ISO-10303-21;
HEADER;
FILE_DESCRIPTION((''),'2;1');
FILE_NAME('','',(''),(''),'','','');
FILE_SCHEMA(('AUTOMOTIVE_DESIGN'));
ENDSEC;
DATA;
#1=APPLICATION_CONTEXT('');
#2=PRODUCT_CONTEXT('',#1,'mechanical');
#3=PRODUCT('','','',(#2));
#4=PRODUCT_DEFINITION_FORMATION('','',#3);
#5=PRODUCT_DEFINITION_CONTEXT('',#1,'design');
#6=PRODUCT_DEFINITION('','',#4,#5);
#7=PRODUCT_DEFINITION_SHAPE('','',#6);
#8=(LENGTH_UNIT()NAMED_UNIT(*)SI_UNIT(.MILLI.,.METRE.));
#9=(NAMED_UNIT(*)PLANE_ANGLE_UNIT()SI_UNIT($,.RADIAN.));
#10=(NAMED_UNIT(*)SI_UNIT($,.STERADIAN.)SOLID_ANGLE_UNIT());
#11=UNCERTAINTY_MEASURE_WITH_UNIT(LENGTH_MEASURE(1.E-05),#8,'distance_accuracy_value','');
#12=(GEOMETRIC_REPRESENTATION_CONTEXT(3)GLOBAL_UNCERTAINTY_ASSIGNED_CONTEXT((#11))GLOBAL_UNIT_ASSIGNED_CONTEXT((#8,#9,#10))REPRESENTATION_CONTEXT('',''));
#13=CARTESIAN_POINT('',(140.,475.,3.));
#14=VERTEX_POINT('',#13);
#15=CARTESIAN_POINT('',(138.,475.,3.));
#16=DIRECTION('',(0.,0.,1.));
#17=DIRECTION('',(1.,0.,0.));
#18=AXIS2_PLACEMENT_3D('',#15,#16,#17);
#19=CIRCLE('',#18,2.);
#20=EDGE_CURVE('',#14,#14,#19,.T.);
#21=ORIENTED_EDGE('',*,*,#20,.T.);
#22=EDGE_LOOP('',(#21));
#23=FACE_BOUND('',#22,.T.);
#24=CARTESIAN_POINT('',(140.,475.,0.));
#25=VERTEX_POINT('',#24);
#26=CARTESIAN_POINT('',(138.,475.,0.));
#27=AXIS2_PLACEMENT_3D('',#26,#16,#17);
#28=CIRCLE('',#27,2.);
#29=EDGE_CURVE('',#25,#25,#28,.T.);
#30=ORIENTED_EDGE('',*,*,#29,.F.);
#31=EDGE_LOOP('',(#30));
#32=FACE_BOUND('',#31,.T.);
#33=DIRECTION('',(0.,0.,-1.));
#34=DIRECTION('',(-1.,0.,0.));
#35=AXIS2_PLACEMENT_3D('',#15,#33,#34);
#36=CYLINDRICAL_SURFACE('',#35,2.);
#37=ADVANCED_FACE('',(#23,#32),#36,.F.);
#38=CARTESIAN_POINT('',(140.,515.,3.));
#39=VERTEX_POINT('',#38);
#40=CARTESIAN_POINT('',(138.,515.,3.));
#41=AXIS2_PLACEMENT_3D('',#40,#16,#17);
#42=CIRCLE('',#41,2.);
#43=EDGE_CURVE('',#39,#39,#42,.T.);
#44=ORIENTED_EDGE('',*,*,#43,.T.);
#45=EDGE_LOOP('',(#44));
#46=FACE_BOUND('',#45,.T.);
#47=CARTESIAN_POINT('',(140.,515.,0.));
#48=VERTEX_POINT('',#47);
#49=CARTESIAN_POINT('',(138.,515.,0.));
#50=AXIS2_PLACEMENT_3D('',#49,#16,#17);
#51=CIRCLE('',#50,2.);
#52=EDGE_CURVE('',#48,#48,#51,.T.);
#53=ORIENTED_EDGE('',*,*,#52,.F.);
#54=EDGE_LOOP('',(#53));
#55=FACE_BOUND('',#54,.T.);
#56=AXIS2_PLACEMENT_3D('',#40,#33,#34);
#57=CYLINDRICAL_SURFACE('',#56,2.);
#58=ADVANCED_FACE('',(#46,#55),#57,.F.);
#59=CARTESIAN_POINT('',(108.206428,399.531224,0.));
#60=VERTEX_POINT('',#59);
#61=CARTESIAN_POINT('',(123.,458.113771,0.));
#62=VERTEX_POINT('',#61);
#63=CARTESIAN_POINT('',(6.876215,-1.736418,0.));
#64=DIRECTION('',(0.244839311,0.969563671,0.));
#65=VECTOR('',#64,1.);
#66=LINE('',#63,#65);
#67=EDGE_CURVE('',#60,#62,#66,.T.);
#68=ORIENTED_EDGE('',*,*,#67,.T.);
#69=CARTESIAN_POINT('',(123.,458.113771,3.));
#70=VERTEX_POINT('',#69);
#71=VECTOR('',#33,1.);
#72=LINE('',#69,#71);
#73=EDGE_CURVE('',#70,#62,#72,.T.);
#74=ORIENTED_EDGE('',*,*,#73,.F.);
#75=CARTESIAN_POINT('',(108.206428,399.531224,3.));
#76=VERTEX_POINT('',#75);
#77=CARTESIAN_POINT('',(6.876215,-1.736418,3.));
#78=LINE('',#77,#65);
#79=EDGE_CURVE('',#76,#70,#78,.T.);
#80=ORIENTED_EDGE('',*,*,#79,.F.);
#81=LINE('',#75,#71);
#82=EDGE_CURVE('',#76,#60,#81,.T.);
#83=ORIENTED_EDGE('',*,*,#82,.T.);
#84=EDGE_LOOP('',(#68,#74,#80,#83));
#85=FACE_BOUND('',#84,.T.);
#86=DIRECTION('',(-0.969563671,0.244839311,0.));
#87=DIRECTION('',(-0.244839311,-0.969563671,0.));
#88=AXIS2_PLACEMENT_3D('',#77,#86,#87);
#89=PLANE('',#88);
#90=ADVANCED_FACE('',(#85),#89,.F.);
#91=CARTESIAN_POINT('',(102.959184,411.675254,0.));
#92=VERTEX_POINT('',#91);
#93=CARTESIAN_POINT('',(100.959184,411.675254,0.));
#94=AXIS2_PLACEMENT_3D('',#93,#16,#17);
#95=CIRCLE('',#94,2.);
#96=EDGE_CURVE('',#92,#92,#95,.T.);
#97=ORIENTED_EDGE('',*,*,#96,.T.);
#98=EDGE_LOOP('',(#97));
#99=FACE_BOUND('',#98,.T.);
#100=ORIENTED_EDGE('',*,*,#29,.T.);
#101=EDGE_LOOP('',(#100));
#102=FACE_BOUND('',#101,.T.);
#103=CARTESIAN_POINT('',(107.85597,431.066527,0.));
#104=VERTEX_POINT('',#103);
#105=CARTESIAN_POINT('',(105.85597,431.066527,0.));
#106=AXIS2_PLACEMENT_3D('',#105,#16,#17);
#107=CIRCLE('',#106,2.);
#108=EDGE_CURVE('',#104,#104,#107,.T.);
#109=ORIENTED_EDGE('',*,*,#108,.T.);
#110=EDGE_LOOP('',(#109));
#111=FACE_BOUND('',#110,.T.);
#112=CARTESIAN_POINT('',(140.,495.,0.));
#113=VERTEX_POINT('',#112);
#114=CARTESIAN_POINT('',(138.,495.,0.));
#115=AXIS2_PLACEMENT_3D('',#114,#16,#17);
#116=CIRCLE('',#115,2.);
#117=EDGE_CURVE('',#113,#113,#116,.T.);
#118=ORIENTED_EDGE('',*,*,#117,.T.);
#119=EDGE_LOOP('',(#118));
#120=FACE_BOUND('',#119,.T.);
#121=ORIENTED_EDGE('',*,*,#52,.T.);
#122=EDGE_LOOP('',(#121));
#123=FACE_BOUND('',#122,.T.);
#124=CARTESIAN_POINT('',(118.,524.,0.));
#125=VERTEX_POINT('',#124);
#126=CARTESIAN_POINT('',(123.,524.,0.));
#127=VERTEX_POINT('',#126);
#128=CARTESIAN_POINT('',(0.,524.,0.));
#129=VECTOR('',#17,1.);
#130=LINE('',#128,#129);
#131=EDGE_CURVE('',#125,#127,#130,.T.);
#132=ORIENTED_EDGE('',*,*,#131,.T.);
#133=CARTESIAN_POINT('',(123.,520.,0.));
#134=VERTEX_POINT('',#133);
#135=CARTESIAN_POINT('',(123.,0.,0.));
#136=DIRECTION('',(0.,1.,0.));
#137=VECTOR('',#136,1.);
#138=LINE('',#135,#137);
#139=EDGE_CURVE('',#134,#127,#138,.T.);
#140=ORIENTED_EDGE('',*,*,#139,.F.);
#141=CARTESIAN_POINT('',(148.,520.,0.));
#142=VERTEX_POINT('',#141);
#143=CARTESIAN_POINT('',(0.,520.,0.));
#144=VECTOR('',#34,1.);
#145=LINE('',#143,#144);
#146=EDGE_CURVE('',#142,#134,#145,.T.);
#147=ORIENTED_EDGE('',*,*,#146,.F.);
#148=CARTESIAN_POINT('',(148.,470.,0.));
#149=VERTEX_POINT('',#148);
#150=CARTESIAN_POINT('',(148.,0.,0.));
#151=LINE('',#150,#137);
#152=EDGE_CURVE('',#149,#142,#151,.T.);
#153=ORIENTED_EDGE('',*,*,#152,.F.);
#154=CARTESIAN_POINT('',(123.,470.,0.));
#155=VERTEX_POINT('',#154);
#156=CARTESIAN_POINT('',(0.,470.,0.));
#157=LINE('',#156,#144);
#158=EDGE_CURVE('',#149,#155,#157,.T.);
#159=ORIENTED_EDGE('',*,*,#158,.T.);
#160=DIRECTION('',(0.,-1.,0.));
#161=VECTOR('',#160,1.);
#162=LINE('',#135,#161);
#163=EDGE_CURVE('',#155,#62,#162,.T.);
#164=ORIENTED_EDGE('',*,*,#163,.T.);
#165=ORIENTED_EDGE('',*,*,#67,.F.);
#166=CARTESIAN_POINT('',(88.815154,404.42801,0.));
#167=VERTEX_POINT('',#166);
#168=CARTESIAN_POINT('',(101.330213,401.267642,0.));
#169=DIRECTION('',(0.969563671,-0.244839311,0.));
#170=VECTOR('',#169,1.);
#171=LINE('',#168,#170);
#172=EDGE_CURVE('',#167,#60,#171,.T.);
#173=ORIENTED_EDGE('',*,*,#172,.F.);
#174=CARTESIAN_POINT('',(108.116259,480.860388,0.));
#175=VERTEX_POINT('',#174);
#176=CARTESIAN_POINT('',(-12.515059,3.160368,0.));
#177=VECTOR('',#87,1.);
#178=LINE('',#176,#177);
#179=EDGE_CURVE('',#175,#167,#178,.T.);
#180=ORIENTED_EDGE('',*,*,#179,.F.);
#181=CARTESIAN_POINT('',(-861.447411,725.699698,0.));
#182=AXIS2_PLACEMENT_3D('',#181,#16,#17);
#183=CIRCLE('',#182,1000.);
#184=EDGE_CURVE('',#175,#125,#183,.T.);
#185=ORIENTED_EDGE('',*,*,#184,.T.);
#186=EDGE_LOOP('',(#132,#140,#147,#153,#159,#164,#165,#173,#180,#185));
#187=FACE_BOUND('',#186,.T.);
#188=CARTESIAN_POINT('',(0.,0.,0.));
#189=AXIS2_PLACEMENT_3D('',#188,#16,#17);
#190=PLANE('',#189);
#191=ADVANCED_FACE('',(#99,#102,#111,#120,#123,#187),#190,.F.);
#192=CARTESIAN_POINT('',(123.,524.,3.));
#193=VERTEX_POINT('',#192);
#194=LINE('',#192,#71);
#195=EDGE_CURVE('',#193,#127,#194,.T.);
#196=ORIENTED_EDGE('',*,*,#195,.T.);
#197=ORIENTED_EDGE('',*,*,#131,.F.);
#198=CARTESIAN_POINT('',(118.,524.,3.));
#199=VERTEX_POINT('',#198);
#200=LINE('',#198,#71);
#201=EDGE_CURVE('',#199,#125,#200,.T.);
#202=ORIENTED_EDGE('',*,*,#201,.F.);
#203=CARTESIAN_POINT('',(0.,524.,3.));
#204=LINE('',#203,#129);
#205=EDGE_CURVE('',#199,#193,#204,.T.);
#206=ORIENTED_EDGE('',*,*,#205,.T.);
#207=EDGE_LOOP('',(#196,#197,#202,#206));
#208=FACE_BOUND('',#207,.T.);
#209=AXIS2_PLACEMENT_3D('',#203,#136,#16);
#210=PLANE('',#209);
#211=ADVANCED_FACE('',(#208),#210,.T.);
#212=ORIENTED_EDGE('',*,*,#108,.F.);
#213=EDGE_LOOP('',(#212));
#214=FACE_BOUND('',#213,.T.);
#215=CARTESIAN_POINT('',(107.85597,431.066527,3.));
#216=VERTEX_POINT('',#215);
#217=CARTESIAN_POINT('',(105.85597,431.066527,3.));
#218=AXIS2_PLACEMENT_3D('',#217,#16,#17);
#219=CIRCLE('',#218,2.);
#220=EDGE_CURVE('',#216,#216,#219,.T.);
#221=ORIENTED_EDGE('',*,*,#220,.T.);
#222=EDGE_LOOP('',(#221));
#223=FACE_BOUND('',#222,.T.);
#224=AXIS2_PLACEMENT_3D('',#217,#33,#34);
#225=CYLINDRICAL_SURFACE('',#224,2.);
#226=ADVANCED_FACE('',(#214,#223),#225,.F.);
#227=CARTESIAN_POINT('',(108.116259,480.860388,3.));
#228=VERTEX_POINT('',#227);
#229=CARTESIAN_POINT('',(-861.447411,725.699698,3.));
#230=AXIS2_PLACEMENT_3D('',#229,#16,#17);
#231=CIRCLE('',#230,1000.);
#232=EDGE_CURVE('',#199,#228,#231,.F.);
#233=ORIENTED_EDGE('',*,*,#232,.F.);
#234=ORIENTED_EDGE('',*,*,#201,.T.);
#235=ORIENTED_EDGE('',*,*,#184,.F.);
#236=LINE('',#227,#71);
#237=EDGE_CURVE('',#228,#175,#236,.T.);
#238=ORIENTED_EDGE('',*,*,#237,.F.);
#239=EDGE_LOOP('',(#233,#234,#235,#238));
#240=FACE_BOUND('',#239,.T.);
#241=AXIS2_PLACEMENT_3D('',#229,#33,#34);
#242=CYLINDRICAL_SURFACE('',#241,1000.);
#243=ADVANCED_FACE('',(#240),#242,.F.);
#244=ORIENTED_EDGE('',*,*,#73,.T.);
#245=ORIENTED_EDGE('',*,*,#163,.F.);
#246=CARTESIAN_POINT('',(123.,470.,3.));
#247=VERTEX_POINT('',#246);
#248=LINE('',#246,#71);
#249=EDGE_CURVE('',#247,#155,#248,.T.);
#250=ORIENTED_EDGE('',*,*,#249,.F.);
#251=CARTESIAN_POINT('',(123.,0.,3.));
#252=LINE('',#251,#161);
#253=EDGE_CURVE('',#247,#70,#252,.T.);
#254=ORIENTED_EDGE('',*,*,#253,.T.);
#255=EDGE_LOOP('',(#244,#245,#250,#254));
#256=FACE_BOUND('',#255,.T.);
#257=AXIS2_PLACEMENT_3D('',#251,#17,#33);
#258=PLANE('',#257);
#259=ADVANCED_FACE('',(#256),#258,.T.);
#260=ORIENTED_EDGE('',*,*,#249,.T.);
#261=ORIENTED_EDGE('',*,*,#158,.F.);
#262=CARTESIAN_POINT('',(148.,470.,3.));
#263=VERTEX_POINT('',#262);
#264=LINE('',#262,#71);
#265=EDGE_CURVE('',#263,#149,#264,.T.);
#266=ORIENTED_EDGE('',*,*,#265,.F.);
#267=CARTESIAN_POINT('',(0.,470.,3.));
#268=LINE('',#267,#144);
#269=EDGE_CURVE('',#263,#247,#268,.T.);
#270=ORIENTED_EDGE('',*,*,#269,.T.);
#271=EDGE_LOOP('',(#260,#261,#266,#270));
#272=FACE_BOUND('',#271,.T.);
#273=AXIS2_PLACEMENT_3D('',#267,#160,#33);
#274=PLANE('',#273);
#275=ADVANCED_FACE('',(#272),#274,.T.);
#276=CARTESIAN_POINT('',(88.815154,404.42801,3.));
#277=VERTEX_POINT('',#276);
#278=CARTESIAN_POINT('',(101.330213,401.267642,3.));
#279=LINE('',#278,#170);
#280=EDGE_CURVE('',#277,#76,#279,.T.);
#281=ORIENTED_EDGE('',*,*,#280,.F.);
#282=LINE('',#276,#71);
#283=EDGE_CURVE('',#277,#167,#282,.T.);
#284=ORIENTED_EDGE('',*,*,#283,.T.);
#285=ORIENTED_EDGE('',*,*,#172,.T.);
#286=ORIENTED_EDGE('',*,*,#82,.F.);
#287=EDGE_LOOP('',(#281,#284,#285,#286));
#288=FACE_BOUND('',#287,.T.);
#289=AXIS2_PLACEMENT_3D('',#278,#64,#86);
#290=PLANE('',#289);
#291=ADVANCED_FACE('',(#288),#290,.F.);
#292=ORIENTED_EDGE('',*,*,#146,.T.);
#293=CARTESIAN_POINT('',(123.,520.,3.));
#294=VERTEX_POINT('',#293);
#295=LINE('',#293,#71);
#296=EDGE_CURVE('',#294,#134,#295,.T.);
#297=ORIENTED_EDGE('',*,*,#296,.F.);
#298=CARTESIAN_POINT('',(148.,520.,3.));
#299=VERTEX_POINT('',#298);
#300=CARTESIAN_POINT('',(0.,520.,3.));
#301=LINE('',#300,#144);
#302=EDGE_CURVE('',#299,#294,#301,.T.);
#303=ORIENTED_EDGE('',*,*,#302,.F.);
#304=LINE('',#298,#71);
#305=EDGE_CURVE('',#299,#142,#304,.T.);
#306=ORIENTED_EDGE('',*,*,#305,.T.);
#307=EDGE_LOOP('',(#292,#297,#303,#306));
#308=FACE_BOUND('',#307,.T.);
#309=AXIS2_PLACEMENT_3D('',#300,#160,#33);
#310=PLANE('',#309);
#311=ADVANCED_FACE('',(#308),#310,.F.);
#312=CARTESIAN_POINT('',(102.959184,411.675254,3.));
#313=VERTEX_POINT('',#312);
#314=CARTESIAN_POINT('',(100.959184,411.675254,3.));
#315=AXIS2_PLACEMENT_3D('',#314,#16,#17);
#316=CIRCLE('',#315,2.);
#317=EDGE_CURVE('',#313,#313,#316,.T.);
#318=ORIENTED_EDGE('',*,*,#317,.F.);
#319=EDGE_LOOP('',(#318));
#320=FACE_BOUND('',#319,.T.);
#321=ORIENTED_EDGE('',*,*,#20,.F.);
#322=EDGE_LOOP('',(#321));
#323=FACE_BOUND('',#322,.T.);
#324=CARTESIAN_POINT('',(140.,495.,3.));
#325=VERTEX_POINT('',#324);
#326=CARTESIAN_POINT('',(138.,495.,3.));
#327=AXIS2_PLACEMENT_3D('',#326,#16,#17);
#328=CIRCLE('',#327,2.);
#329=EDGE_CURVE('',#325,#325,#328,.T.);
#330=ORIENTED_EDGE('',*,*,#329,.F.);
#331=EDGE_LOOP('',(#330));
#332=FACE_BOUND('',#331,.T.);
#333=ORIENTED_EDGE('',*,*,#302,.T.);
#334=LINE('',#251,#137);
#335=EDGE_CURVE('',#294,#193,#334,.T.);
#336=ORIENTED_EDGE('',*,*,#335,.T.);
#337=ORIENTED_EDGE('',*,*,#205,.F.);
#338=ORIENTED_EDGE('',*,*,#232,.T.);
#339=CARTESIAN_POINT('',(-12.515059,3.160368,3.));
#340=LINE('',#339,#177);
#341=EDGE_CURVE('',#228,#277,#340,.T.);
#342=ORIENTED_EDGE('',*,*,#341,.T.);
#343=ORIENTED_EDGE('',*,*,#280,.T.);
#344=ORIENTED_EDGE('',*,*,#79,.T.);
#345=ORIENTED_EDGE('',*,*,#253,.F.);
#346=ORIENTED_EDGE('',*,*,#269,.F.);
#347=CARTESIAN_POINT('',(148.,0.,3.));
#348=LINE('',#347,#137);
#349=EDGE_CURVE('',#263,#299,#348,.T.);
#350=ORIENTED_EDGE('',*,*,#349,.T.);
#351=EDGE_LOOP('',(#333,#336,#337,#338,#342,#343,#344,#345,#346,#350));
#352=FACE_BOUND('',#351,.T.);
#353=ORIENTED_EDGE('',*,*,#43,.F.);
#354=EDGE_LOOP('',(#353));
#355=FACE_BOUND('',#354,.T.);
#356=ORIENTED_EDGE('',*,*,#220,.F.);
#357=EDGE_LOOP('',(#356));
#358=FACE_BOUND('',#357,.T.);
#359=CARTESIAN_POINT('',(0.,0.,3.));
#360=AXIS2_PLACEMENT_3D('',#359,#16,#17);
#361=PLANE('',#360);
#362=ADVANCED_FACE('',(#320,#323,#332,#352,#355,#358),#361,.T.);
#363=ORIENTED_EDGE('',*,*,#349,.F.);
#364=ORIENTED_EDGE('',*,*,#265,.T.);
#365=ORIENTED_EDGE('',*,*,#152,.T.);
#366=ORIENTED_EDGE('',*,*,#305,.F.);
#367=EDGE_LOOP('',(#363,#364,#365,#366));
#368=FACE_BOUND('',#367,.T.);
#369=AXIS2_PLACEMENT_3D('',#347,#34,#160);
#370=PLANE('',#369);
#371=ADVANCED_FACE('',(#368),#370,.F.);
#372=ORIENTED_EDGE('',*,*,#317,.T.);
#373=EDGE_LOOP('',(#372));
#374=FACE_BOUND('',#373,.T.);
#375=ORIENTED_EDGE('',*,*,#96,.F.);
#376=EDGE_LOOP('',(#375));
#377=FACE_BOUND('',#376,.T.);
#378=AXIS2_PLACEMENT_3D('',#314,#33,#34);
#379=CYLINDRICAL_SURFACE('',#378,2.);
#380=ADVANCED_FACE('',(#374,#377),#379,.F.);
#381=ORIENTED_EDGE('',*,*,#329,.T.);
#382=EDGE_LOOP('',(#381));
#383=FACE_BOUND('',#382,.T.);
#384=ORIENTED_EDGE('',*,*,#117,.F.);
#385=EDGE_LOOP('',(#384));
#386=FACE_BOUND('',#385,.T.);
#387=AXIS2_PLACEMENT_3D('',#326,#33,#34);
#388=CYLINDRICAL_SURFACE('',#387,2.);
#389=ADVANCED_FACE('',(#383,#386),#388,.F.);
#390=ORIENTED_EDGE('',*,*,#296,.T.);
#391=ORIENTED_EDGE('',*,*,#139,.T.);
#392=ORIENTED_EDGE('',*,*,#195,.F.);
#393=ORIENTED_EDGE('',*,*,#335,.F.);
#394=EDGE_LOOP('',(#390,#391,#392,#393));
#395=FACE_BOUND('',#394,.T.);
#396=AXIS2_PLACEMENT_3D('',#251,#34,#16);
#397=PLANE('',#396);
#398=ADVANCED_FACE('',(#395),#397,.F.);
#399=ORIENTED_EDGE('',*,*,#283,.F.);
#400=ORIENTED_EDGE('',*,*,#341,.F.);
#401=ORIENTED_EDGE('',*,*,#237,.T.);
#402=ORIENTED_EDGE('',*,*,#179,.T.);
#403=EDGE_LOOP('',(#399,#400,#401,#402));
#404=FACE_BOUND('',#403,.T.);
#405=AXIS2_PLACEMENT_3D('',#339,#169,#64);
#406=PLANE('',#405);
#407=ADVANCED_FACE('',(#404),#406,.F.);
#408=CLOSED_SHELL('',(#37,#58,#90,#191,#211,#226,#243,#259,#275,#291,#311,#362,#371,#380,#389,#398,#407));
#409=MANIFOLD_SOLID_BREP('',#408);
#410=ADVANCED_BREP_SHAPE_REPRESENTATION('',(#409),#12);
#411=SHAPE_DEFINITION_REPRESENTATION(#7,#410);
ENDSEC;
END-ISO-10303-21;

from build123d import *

# Parameters (mm, degrees)
SKETCH_1_R      = 2
SKETCH_1_W      = 5
SKETCH_1_H      = 4
EXTRUDE_1_DEPTH = 3
FILLET_3_R      = 1000


with BuildPart() as part:
    # 草图1 → 凸台-拉伸1 (new body)
    # profile 1 of 2: a face of its own
    with BuildSketch(Plane.XY):
        Polygon((124.141229584, 470), (125, 470), (148, 470), (148, 520), (123, 520), (118, 520), (88.81515415, 404.428010432), (108.206427567, 399.531224216), (118, 438.31377105), (123, 458.11377105), (123, 470), align=None)
        with Locations((100.959183966, 411.675254033)):
            Circle(SKETCH_1_R, mode=Mode.SUBTRACT)
        with Locations((105.855970183, 431.06652745)):
            Circle(SKETCH_1_R, mode=Mode.SUBTRACT)
        with Locations((138, 475)):
            Circle(SKETCH_1_R, mode=Mode.SUBTRACT)
        with Locations((138, 495)):
            Circle(SKETCH_1_R, mode=Mode.SUBTRACT)
        with Locations((138, 515)):
            Circle(SKETCH_1_R, mode=Mode.SUBTRACT)
    # profile 2 of 2: a face of its own
    with BuildSketch(Plane.XY):
        with Locations((120.5, 522)):
            Rectangle(SKETCH_1_W, SKETCH_1_H)
    extrude(amount=EXTRUDE_1_DEPTH)

    # 圆角3
    # the kernel refuses this fillet: 1000 mm, written as the material it adds along each edge
    with BuildSketch(Plane(origin=(118, 520, 0), x_dir=(-0.24483931082618016, -0.9695636708716768, 0), z_dir=(0, 0, 1))) as fillet_3_piece_1:
        with BuildLine():
            CenterArc((40.368274514, -1000), FILLET_3_R, 90, 2.535967308)
            Line((-3.878254683, -0.979357243), (0, 0))
            Line((0, 0), (40.368274514, 0))
        make_face()
    extrude(amount=3)


solid = part.part
